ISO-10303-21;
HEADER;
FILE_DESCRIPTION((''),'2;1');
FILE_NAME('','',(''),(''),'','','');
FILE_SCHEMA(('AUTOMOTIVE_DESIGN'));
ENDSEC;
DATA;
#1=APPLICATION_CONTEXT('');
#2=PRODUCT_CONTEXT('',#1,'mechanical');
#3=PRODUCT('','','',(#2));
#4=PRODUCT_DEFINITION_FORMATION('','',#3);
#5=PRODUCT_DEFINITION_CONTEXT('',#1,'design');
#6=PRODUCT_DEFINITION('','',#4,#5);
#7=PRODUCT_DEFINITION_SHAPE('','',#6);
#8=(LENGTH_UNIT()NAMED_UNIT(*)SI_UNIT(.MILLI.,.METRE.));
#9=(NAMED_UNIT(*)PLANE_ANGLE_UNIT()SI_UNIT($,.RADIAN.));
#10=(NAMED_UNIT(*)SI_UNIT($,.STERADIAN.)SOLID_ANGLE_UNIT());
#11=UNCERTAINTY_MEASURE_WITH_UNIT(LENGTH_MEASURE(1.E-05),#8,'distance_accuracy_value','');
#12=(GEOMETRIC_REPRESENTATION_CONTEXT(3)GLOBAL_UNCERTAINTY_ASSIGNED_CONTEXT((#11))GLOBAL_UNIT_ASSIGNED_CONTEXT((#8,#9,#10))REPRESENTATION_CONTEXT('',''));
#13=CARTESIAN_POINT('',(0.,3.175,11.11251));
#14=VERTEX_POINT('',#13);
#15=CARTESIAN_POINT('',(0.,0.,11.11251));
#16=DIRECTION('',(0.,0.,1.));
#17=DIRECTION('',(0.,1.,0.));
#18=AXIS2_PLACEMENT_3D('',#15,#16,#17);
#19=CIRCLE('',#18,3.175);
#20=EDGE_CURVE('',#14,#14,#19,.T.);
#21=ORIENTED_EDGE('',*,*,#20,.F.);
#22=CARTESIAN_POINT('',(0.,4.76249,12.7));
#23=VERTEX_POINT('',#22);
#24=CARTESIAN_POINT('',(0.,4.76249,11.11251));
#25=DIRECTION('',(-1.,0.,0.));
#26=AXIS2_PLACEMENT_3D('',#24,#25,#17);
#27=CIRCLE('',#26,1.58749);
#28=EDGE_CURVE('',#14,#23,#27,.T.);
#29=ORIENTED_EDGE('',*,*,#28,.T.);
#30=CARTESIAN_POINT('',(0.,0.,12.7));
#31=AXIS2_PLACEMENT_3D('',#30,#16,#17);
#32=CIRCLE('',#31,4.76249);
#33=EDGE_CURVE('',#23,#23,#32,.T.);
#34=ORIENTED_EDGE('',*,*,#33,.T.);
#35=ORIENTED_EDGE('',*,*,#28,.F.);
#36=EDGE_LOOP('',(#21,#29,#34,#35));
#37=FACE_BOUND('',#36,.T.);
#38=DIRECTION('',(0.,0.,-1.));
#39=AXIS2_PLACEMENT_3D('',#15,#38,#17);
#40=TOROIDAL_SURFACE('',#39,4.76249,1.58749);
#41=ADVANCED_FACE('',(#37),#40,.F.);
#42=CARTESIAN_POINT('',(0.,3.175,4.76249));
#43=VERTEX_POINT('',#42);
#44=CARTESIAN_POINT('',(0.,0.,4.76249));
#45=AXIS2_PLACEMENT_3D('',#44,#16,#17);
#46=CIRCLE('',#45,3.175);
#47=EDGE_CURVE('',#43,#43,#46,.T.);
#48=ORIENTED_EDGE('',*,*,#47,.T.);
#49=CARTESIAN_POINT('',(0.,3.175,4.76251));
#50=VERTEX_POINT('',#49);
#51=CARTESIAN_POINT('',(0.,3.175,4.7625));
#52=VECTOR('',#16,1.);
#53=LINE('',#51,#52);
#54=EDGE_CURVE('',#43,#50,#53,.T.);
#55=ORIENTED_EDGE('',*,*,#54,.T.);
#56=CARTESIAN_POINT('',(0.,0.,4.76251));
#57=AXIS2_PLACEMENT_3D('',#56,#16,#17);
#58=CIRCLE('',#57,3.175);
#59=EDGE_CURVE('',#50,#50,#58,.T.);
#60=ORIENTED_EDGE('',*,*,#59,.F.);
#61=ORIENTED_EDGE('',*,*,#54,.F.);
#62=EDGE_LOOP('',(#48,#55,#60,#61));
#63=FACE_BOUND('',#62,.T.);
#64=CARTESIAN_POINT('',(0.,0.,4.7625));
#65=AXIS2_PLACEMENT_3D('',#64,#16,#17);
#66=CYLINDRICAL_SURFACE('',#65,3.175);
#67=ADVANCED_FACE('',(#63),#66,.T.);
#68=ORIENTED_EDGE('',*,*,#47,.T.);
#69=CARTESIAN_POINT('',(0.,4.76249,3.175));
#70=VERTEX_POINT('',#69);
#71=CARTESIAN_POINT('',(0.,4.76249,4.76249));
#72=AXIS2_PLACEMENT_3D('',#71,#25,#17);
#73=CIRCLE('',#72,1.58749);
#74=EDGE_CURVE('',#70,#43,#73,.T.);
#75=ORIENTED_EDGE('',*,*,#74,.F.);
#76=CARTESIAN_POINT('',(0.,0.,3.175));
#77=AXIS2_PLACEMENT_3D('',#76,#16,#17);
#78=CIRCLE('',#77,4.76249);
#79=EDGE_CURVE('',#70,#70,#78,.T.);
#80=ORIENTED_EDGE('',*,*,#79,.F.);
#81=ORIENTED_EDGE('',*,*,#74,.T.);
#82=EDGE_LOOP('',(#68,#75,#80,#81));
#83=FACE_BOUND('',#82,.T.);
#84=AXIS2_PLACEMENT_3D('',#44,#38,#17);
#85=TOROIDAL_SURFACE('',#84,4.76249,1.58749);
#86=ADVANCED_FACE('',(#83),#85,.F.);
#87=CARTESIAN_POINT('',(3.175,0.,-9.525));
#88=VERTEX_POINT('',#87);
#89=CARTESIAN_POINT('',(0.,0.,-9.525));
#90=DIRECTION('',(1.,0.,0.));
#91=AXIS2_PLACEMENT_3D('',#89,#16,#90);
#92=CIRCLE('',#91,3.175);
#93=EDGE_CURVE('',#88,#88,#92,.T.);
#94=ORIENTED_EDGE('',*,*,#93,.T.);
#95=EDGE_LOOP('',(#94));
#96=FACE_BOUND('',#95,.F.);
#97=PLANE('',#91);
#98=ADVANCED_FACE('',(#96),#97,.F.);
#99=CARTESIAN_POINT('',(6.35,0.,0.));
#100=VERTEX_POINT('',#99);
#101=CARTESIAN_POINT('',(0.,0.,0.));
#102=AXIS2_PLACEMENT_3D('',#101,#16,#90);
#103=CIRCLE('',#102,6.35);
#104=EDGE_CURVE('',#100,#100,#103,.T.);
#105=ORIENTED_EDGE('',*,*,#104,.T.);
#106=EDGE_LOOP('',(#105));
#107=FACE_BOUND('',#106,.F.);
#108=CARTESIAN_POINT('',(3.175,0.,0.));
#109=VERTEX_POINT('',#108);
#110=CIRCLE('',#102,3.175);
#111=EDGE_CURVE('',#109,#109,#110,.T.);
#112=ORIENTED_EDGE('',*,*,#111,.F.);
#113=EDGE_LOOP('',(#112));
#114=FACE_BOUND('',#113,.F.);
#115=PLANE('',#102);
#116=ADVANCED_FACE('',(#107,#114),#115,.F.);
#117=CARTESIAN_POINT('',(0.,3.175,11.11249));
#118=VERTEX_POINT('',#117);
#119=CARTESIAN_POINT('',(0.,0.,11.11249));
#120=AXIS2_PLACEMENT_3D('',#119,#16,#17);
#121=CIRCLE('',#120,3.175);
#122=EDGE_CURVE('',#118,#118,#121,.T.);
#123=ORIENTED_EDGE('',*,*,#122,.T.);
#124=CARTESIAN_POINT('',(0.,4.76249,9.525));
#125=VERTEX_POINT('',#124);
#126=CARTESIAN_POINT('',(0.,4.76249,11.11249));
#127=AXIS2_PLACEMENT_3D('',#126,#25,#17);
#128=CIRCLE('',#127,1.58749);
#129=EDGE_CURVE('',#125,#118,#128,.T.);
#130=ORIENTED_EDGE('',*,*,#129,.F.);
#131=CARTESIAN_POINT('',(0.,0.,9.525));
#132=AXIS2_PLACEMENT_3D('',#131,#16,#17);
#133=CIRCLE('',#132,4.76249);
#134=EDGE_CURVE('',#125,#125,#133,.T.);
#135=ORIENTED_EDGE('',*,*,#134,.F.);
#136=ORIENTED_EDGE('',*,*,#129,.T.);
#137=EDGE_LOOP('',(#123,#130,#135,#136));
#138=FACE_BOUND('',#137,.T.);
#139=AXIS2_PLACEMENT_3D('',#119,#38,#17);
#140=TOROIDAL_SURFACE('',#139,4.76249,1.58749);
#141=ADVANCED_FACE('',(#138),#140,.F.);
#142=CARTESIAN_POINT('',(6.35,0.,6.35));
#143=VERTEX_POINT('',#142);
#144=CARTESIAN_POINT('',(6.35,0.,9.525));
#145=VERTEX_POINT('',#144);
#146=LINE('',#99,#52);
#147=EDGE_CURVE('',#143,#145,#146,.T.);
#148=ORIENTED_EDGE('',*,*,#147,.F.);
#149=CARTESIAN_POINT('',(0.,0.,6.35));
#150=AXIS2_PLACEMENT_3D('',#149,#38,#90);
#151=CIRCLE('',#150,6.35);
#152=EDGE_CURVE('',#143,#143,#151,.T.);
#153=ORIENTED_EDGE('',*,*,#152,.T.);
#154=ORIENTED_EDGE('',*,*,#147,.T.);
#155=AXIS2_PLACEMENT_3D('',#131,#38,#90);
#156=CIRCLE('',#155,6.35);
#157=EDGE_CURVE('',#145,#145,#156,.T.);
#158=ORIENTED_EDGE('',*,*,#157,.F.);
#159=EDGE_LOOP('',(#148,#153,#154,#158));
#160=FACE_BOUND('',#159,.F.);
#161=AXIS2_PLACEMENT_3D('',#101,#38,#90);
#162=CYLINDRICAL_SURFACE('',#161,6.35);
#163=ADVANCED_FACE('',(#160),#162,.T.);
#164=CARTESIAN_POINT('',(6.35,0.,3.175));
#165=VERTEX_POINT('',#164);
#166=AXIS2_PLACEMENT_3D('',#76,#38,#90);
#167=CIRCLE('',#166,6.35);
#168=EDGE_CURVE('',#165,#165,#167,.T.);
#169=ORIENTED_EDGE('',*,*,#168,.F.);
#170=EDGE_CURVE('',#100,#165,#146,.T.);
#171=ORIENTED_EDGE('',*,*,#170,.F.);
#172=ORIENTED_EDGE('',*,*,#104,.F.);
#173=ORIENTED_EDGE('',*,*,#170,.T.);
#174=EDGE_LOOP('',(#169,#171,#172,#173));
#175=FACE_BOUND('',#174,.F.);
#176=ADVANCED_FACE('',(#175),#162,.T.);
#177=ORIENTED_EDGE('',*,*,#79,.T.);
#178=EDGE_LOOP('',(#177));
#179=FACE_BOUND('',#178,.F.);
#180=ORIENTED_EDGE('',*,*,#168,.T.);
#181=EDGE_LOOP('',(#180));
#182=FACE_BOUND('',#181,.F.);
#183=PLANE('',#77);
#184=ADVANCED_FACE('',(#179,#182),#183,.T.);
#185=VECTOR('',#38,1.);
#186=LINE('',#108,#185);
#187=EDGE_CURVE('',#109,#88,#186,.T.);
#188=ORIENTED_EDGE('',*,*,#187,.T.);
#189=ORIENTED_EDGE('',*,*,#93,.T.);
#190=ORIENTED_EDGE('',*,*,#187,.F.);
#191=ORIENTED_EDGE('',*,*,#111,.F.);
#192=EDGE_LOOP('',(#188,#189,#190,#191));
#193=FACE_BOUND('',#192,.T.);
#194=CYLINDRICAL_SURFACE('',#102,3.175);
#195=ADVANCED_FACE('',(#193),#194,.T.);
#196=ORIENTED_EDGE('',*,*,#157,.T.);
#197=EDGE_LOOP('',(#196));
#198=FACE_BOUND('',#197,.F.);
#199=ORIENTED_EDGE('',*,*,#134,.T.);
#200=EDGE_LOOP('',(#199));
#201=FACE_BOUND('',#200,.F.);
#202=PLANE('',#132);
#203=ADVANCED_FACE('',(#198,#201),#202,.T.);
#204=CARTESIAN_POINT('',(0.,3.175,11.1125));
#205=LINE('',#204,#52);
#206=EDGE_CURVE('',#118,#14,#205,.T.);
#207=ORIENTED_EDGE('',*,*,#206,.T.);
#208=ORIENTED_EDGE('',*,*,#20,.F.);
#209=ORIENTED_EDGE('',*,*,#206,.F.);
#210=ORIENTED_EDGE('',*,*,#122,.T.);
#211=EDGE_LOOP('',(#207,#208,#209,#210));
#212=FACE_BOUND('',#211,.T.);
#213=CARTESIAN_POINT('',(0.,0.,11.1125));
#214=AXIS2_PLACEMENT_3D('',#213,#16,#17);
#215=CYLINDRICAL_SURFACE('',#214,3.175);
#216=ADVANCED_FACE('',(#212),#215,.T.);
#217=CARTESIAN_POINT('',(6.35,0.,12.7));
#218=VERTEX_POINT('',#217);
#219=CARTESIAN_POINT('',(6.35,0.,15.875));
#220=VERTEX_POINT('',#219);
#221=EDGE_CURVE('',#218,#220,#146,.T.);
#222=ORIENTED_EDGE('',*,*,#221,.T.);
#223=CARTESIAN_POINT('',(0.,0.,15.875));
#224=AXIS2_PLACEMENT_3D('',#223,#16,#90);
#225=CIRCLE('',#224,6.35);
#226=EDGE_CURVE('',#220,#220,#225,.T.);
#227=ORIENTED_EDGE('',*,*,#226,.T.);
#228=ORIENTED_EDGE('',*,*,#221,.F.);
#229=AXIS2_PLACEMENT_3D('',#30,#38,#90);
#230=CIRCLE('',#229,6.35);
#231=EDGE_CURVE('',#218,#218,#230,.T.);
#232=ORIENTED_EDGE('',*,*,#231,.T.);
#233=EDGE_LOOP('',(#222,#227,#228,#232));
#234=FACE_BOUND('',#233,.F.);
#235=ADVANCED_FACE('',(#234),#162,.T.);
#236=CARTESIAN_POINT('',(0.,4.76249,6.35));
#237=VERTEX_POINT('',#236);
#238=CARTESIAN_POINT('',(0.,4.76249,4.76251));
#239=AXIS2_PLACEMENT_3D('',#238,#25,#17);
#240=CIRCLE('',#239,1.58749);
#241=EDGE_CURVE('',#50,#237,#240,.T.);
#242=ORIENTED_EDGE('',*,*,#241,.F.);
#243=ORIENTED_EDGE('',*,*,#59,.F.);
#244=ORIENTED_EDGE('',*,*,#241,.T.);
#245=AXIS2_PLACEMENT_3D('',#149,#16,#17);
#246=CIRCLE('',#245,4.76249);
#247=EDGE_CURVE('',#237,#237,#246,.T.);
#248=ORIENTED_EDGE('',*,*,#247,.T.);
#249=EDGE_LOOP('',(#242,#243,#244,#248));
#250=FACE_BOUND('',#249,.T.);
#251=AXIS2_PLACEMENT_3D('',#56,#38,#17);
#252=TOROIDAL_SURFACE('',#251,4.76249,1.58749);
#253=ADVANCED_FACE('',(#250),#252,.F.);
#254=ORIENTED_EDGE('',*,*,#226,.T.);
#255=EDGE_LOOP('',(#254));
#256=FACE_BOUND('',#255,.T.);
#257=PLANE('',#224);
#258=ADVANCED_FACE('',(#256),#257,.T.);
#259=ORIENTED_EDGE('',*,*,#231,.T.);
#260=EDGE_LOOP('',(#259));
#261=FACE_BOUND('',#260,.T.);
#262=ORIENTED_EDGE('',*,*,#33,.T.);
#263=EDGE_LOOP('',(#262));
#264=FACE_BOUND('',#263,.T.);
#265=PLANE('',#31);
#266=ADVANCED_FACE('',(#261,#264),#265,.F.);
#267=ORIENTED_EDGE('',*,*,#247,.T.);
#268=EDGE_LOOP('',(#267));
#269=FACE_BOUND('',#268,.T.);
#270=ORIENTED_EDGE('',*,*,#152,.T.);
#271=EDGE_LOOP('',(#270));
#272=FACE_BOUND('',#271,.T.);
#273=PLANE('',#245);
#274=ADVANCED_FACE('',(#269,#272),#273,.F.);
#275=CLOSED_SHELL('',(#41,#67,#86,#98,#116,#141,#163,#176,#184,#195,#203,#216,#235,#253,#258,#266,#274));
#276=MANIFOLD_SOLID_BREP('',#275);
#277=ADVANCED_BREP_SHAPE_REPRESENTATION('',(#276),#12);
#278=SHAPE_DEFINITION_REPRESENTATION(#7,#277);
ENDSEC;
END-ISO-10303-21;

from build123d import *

# Parameters (mm, degrees)
F0_R     = 6.35
F0_R_2   = 3.175
F1_DEPTH = 15.875
F3_DEPTH = 9.525
F4_W     = 3.175
F4_H     = 3.175
F6_R     = 1.58749


# Not quite as in the source:
# - a fillet or chamfer is up to 0.001 mm smaller than in the source, because OpenCascade refuses the exact size


with BuildPart() as f1:
    # F0 (on Top) → F1 (new body)
    with BuildSketch(Plane.XY):
        Circle(F0_R)
        Circle(F0_R_2, mode=Mode.SUBTRACT)
        Circle(F0_R_2)
    extrude(amount=F1_DEPTH)

    # F0 (on Top) → F3 (join)
    with BuildSketch(Plane.XY):
        Circle(F0_R_2)
    extrude(amount=-F3_DEPTH)

    # F4 (on Right) → F5 (revolve, cut)
    with BuildSketch(Plane.YZ):
        with Locations((4.7625, 4.7625)):
            Rectangle(F4_W, F4_H)
        with Locations((4.7625, 11.1125)):
            Rectangle(F4_W, F4_H)
    revolve(axis=Axis((0, 0, -0.284396112), (0, 0, 1)), mode=Mode.SUBTRACT)

    # F6 (radius 1.5875 in the source; OpenCascade refuses exactly that, so slightly less here)
    f6_edges = [f1.edges().sort_by_distance(p)[0] for p in [
        (0, -3.175, 3.175),
        (0, -3.175, 6.35),
        (0, -3.175, 9.525),
        (0, -3.175, 12.7),
    ]]
    fillet(f6_edges, radius=F6_R)


solid = f1.part
